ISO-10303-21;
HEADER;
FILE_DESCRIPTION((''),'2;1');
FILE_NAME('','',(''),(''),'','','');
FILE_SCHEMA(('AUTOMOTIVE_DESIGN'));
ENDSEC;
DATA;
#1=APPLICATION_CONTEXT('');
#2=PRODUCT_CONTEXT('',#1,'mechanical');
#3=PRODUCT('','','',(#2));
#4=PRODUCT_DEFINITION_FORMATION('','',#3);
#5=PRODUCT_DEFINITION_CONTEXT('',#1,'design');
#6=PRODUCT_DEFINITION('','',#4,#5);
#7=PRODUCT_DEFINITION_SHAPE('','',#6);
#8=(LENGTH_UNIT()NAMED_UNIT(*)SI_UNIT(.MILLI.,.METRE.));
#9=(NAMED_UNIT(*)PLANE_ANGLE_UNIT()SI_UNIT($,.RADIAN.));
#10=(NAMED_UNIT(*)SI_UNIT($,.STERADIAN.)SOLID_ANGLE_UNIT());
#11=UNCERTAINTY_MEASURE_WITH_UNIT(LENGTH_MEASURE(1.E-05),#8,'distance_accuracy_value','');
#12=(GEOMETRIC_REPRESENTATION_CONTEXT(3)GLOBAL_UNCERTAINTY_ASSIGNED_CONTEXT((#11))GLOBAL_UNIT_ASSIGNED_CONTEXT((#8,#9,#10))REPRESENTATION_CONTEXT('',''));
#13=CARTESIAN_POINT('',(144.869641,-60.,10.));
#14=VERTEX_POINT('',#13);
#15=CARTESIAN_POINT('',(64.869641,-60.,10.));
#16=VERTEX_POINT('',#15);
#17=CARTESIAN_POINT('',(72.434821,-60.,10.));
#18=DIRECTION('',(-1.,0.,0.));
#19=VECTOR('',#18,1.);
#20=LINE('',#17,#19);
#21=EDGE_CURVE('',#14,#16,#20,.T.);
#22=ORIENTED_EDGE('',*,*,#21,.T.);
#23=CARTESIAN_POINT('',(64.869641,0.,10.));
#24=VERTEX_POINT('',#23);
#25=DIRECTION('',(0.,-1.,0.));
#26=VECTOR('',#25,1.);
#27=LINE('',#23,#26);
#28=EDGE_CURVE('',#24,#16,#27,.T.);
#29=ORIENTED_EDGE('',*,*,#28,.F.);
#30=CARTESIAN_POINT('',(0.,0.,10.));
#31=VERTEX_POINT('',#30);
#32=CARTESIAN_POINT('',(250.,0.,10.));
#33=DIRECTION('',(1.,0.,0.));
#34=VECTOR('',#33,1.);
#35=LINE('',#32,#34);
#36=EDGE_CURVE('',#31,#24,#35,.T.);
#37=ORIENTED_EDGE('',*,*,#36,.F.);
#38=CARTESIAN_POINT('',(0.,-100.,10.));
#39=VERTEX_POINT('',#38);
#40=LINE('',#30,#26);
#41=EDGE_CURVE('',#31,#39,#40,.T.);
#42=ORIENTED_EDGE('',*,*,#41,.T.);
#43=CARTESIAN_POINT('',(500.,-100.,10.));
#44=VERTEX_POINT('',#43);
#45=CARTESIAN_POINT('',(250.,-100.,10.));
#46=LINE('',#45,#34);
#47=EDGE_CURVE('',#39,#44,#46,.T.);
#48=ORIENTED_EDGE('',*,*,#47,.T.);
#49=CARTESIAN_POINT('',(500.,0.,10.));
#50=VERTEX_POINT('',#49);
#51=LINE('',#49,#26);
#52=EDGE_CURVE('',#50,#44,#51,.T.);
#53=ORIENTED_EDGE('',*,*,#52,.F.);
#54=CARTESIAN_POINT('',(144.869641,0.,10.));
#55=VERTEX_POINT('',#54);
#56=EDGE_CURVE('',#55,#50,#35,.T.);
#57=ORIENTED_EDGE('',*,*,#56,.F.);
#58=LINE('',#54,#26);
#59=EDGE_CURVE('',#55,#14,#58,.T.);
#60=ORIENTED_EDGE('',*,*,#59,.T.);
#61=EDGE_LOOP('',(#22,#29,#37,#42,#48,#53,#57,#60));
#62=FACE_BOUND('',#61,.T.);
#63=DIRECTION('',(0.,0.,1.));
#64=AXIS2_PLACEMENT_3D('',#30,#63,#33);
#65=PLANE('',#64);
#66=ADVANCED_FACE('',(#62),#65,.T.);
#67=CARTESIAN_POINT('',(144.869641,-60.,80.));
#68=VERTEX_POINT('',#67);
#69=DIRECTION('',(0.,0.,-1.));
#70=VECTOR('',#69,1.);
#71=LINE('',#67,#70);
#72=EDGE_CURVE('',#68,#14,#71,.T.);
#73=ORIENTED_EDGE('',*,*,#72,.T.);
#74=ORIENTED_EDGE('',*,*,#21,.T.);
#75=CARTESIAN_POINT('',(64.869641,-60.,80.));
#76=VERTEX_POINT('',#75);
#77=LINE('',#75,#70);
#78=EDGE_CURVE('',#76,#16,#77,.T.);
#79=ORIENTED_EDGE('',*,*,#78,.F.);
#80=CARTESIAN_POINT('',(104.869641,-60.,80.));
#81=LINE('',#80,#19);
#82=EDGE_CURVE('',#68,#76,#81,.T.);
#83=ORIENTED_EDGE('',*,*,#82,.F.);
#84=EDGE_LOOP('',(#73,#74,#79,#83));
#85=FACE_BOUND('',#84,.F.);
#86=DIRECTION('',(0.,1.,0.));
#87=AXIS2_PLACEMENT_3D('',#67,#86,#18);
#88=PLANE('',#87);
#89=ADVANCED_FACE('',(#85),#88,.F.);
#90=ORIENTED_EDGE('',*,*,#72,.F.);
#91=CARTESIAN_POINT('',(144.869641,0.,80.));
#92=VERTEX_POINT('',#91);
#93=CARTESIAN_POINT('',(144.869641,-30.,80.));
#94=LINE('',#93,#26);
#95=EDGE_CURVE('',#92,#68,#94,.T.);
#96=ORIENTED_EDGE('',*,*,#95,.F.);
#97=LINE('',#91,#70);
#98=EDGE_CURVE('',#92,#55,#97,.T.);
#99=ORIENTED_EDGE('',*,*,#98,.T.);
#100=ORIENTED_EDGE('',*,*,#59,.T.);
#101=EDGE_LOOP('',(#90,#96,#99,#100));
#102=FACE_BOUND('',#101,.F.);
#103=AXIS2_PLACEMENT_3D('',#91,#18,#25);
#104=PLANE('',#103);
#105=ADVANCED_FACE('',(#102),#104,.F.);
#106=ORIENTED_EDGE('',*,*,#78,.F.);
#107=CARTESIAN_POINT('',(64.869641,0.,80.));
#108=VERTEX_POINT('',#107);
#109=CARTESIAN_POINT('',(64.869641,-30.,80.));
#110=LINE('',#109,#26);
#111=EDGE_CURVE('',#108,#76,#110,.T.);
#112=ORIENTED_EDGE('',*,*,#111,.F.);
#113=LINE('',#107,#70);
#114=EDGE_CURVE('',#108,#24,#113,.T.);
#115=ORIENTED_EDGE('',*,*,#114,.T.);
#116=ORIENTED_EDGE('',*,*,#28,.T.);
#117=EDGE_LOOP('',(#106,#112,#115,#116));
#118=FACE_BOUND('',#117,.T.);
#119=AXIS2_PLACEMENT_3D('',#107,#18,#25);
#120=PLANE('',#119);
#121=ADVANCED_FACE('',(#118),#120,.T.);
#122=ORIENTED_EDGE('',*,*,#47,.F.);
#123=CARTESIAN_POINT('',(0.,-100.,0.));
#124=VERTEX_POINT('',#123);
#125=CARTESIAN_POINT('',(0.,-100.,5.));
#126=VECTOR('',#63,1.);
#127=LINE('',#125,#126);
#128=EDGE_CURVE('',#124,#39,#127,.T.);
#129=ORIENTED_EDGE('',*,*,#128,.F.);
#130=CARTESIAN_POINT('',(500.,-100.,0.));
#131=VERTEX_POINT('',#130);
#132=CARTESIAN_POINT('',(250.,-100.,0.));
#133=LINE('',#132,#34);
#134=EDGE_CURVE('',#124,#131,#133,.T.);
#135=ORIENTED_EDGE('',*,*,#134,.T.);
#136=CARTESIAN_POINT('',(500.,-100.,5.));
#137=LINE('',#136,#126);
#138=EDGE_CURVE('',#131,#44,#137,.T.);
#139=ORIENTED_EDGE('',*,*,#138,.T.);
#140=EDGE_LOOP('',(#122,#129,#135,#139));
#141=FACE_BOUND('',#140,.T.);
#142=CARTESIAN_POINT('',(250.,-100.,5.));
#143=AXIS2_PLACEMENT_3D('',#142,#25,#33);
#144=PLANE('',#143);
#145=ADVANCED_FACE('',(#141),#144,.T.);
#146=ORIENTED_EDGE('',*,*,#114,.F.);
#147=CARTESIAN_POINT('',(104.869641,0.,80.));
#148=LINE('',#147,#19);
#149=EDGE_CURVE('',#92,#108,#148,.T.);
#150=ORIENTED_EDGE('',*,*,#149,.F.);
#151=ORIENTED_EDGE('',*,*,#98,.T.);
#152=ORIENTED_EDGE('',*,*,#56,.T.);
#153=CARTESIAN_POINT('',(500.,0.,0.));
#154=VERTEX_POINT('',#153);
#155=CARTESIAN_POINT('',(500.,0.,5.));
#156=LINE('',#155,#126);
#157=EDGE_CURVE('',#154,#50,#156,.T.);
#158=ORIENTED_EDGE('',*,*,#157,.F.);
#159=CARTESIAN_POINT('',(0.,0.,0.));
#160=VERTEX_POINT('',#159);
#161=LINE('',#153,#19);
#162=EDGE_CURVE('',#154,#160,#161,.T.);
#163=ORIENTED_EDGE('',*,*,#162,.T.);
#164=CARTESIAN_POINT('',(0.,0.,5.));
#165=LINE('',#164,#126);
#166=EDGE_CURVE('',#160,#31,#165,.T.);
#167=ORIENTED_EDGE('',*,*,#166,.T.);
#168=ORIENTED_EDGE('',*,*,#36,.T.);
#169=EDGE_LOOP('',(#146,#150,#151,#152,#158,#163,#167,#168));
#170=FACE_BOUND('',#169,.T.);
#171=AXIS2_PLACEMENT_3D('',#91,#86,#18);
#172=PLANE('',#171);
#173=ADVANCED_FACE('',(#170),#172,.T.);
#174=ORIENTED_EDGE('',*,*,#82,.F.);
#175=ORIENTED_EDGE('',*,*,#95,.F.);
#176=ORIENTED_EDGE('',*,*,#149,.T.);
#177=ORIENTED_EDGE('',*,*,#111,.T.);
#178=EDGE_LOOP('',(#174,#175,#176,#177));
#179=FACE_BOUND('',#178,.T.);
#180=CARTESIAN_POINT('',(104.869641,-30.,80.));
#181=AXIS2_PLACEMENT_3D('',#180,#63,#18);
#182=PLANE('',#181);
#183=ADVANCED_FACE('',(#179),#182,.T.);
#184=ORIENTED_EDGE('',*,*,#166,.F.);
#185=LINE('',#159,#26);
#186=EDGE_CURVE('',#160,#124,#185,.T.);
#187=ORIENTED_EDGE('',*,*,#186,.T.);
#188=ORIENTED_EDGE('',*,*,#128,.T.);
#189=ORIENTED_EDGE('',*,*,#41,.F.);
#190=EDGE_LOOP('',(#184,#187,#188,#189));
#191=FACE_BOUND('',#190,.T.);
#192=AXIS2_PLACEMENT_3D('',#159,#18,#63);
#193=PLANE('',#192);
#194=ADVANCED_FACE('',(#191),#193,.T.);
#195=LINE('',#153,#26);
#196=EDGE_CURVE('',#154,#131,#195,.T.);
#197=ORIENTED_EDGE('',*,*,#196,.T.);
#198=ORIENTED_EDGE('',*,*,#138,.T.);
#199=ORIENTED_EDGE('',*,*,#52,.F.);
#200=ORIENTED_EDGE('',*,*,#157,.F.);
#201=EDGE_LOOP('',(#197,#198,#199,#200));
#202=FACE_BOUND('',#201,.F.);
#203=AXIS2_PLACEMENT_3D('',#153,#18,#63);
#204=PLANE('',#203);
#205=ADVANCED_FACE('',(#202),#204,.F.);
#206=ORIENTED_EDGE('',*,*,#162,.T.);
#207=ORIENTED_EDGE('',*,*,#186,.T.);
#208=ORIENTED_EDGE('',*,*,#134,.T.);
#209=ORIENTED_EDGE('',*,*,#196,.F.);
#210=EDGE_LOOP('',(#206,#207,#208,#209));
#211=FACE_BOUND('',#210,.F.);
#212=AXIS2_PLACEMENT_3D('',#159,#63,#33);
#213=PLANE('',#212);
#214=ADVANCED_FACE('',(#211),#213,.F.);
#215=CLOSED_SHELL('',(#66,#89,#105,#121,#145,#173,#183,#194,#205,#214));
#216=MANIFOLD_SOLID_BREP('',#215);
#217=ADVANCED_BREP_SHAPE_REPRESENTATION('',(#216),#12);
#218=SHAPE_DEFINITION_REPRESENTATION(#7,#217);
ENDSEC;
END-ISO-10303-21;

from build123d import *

# Parameters (mm, degrees)
F0_W           = 500
F0_H           = 10
F1_DEPTH       = 100
F3_E2_BOTTOM_W = 80
F3_E2_BOTTOM_H = 60
F4_DEPTH       = 80


with BuildPart() as f1:
    # F0 (on Front) → F1 (new body)
    with BuildSketch(Plane.XZ):
        with Locations((250, 5)):
            Rectangle(F0_W, F0_H)
    extrude(amount=F1_DEPTH)

    # F3_E2_bottom (on explicit) → F4 (join)
    with BuildSketch(Plane(origin=(144.8696413147, 0, 80), x_dir=(-1, 0, 0), z_dir=(0, 0, 1))):
        with Locations((40, 30)):
            Rectangle(F3_E2_BOTTOM_W, F3_E2_BOTTOM_H)
    extrude(amount=-F4_DEPTH)


solid = f1.part
